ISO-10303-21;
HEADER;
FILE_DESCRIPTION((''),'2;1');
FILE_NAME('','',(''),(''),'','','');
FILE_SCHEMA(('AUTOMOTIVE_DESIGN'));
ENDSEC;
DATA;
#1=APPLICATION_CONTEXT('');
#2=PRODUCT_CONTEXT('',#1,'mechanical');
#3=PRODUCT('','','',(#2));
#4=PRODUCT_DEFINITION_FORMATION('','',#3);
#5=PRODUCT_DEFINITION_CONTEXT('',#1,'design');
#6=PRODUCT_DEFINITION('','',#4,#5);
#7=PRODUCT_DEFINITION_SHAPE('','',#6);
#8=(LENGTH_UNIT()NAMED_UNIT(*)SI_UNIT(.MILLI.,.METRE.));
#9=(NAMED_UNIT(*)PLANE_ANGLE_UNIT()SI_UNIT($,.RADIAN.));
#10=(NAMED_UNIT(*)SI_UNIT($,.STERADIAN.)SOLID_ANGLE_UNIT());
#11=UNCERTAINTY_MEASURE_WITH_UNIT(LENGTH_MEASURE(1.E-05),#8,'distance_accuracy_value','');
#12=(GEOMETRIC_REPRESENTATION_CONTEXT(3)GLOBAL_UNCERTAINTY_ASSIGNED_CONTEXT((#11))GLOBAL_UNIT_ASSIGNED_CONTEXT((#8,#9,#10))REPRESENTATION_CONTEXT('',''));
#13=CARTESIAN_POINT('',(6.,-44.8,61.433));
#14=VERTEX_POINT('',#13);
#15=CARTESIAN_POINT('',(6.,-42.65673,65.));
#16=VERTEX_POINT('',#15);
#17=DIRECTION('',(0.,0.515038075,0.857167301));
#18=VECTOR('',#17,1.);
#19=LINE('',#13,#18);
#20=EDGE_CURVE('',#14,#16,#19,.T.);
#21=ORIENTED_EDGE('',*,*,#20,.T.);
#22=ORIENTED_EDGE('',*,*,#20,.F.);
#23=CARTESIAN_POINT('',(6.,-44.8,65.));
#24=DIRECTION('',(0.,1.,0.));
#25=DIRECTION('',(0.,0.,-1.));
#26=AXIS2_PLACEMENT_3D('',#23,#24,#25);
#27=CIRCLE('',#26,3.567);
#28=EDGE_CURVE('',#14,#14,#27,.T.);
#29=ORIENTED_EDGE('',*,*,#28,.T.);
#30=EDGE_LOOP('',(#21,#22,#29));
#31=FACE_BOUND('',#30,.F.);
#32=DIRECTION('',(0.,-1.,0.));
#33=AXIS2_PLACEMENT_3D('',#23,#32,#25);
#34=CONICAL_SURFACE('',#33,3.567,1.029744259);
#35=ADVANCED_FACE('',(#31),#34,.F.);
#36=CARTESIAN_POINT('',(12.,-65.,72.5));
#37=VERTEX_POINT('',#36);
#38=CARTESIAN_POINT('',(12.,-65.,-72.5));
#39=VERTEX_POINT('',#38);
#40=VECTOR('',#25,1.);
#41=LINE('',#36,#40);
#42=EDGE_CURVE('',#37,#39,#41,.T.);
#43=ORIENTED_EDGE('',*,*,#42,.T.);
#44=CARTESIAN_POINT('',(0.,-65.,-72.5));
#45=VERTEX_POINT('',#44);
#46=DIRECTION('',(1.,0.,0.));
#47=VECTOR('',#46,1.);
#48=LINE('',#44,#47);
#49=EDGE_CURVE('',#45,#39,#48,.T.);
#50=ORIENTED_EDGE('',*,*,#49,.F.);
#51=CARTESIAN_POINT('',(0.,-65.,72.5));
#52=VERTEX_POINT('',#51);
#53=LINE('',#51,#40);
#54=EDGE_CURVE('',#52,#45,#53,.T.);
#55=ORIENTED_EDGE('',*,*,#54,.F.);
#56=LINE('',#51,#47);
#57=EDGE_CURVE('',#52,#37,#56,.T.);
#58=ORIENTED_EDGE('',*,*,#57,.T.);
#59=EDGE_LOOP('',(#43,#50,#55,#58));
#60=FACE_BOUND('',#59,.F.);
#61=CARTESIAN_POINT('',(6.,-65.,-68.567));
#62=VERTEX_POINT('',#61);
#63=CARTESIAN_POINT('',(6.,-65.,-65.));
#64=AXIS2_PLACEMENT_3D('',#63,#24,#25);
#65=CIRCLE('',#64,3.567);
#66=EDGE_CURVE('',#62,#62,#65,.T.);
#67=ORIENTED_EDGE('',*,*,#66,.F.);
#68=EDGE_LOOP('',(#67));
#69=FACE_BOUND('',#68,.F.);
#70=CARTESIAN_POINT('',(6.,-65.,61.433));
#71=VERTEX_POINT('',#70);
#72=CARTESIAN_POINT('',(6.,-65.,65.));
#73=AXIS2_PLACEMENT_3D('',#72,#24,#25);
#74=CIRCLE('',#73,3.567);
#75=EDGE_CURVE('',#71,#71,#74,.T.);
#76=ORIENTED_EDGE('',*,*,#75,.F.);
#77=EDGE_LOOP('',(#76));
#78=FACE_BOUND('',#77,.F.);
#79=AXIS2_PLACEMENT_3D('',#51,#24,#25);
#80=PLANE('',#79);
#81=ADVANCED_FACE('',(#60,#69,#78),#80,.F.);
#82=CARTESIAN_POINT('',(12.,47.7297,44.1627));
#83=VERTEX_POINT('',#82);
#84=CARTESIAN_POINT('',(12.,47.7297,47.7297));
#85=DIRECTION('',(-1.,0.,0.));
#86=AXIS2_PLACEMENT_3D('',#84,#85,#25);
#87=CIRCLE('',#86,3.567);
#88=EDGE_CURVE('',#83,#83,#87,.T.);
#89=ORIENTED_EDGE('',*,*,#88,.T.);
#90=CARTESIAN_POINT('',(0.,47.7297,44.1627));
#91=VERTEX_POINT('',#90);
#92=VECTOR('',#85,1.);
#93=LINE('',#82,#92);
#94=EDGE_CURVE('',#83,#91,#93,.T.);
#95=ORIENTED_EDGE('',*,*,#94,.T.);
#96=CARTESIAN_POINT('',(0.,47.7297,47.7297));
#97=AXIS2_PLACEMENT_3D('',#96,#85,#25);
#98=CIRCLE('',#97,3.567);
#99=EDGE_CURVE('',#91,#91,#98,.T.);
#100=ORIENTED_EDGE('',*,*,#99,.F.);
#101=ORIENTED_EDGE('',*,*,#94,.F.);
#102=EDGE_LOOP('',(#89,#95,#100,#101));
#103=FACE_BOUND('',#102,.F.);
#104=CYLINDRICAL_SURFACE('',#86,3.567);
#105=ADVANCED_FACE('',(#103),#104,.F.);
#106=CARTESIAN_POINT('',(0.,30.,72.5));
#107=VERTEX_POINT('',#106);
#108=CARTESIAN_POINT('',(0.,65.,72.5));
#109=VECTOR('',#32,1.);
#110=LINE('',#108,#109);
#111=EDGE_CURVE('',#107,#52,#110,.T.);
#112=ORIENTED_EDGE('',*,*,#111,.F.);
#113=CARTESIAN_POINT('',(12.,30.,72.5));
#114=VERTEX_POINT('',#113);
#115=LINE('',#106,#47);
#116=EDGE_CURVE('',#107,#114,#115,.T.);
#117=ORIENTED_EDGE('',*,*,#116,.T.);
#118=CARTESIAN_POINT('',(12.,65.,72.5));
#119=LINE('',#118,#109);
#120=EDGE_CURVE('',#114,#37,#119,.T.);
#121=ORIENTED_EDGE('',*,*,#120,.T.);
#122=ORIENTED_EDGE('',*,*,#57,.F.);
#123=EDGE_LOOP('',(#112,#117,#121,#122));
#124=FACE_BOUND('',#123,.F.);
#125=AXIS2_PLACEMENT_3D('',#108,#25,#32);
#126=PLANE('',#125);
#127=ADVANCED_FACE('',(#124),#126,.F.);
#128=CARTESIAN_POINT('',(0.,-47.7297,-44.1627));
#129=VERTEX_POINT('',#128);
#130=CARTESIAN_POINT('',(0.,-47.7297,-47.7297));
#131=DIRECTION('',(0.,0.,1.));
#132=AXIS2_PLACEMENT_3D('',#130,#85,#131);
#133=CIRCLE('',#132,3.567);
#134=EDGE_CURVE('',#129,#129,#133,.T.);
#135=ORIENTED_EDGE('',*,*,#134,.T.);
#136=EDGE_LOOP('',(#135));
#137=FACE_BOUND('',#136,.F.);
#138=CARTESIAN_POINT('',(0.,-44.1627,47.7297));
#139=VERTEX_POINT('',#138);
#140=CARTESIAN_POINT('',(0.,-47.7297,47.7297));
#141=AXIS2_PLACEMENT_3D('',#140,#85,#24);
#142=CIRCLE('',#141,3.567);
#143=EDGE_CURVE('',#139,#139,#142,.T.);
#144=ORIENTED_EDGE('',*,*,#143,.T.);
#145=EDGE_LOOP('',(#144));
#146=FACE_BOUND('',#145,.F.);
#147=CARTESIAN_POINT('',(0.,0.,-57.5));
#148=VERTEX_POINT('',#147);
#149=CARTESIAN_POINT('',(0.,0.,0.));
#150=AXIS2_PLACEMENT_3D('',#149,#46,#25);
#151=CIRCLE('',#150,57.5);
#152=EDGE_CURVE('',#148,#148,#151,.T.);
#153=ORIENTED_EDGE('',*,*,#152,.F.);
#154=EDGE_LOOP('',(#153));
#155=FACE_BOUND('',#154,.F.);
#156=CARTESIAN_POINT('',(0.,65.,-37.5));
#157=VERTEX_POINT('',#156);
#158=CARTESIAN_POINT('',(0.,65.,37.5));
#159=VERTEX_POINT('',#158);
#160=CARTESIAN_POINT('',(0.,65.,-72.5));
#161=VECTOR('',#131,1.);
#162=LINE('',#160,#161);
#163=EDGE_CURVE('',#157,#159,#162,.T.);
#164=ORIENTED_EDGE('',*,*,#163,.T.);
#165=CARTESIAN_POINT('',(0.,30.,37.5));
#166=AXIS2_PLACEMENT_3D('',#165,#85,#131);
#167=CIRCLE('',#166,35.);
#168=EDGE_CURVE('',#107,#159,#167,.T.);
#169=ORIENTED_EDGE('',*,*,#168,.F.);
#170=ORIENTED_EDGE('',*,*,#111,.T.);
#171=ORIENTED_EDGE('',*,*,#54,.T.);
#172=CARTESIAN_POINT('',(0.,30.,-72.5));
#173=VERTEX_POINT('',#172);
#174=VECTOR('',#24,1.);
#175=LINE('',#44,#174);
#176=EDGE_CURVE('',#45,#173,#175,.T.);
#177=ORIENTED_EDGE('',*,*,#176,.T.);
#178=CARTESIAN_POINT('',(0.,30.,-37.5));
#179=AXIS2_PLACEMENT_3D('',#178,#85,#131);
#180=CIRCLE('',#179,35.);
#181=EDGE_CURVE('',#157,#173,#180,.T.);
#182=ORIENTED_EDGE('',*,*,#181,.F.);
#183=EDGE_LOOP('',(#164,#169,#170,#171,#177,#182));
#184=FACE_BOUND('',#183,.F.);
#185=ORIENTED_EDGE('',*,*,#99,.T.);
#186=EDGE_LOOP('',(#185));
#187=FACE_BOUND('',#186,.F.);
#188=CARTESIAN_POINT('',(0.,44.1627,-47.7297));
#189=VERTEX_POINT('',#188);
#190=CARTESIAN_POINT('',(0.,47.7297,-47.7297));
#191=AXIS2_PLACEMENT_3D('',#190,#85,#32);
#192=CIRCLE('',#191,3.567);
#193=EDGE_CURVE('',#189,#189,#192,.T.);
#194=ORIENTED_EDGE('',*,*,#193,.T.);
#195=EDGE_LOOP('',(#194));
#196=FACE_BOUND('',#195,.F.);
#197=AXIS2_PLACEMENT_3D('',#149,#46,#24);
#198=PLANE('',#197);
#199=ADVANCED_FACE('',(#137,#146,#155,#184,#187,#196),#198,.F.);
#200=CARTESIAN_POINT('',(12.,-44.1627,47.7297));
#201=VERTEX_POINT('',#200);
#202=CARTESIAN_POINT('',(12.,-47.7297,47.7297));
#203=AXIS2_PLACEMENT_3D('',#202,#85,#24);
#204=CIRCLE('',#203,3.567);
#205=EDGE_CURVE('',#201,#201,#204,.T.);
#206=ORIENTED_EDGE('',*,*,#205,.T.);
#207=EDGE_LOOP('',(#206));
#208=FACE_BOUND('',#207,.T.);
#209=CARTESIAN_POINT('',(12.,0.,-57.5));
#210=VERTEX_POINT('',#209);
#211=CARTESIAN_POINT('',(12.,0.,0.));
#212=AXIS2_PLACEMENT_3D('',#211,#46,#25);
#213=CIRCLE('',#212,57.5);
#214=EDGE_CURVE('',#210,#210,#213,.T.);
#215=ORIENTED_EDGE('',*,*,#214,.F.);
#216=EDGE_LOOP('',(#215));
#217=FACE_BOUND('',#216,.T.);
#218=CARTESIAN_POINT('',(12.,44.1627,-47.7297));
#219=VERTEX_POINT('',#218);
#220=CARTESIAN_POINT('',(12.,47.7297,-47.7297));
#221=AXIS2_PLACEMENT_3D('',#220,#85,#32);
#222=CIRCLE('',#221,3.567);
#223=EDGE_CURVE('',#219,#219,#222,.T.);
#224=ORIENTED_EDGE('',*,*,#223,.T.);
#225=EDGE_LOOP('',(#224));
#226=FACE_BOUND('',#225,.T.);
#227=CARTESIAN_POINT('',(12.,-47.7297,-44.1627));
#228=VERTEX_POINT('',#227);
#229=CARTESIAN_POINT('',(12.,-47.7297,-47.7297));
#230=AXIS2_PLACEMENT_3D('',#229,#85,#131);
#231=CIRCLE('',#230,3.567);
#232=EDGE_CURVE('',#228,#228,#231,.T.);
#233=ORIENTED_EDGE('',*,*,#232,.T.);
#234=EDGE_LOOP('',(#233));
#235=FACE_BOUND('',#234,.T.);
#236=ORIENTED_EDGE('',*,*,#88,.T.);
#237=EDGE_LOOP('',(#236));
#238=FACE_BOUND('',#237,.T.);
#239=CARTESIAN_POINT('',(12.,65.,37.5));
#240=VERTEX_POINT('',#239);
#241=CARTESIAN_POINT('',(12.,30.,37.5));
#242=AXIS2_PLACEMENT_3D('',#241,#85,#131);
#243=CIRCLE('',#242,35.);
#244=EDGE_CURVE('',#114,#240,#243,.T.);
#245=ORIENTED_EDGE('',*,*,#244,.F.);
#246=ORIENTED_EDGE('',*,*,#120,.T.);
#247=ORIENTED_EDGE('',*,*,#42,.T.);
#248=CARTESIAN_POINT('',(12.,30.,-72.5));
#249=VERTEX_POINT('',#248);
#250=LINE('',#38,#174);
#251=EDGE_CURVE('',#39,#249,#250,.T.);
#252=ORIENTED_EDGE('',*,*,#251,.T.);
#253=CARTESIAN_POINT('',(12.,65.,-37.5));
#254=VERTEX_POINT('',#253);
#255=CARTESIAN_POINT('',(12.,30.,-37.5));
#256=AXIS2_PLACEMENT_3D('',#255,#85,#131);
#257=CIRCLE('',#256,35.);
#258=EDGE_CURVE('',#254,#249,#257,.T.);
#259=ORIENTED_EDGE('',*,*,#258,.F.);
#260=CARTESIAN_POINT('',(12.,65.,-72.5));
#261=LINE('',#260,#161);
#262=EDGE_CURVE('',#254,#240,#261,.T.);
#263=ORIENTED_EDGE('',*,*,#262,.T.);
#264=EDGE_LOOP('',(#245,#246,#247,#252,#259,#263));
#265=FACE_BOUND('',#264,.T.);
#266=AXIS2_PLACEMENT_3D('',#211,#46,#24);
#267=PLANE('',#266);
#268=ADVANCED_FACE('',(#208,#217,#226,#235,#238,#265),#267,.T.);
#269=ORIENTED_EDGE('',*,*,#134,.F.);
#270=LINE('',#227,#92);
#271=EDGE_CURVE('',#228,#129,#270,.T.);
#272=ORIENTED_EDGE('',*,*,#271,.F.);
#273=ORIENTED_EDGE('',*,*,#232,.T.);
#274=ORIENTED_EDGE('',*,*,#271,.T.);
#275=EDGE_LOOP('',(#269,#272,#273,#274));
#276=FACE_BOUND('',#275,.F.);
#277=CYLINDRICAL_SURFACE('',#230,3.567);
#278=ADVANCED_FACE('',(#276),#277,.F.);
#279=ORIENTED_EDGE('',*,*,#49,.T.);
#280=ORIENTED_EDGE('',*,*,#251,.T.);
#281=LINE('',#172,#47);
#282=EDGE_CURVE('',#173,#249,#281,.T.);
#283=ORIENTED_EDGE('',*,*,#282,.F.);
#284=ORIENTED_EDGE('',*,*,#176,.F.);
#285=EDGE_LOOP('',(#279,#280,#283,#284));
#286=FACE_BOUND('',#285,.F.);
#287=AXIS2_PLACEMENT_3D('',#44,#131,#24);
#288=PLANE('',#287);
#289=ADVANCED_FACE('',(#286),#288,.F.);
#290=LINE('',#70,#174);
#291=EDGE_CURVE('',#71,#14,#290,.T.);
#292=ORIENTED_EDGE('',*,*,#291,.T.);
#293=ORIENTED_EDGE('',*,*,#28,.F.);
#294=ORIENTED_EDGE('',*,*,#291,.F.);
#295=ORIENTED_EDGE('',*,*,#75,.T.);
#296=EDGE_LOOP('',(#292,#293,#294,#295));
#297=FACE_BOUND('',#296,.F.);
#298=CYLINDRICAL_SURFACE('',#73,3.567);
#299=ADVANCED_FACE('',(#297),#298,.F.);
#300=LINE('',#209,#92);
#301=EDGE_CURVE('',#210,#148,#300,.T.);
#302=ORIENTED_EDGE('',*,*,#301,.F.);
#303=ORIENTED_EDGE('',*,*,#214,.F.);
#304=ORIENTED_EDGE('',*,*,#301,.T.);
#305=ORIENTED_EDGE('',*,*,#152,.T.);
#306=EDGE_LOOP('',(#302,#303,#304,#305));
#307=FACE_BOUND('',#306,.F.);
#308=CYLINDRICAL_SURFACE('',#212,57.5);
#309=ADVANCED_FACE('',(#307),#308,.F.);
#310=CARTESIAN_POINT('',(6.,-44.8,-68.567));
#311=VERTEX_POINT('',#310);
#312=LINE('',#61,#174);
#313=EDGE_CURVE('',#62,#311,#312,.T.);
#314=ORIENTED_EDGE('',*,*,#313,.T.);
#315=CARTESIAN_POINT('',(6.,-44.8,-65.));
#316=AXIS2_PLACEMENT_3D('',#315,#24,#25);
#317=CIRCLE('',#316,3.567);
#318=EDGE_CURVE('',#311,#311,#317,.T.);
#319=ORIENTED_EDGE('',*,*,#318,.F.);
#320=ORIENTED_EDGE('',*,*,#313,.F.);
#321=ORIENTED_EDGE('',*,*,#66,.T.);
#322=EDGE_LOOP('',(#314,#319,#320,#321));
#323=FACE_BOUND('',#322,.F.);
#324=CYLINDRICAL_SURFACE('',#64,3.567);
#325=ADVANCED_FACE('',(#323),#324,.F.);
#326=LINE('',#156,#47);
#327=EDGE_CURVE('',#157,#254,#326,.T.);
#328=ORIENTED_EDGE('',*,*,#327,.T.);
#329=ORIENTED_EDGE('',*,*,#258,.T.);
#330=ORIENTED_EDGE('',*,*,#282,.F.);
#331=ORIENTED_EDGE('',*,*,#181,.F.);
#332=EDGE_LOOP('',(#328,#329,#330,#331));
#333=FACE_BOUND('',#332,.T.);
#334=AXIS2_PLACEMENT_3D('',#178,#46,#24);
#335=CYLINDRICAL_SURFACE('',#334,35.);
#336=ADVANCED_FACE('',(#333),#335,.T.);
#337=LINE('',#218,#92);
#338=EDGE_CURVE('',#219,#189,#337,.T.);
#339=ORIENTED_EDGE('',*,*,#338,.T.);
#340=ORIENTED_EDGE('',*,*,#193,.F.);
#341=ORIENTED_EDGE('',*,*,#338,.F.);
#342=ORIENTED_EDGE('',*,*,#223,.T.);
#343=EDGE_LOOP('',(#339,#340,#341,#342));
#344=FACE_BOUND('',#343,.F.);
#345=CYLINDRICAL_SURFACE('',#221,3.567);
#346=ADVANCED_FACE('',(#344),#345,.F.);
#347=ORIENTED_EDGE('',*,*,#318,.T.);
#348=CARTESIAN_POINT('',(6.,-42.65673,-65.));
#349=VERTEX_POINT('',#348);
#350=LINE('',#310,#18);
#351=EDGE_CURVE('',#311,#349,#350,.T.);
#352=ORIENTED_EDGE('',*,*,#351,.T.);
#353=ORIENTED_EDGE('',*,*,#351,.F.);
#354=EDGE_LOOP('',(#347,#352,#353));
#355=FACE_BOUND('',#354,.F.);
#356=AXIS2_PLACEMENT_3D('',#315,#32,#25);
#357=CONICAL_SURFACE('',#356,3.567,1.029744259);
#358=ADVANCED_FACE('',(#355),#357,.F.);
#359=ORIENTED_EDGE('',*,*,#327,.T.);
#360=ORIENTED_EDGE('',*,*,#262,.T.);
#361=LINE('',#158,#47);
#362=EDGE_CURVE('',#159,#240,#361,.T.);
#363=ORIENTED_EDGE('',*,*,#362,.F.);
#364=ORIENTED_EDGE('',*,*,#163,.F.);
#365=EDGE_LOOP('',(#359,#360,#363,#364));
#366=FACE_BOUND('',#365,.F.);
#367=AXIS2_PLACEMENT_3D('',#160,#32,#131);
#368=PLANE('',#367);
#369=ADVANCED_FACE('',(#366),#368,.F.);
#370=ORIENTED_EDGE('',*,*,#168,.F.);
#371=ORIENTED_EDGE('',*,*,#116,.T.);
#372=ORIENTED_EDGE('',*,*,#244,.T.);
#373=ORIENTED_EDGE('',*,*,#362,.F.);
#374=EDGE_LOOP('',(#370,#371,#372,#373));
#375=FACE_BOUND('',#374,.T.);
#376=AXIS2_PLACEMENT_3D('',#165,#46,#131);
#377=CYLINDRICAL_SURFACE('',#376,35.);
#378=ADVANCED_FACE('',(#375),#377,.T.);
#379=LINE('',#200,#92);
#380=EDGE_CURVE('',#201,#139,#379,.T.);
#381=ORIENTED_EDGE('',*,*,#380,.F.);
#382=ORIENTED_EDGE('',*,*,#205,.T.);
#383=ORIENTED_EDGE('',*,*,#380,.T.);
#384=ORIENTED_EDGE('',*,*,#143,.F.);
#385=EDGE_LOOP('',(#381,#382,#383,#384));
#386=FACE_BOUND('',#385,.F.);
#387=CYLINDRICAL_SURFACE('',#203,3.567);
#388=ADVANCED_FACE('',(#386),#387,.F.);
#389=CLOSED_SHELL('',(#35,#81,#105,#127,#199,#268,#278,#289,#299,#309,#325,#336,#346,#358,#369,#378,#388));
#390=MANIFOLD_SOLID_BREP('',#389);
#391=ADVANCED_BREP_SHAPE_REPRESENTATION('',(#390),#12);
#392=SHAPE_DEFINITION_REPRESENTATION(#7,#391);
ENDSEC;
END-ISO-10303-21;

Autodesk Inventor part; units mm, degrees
ref_plane "YZ Plane" through (0, 0, 0) normal (1, 0, 0) x (0, 1, 0)
ref_plane "XZ Plane" through (0, 0, 0) normal (0, 1, 0) x (-1, 0, 0)
ref_plane "XY Plane" through (0, 0, 0) normal (0, 0, 1) x (1, 0, 0)
sketch "Sketch1" plane through (0, 0, 0) normal (1, 0, 0) x (0, 1, 0)
  line L0 (-65, -72.5) -> (65, -72.5)
  line L1 (65, -72.5) -> (65, 72.5)
  line L2 (65, 72.5) -> (-65, 72.5)
  line L3 (-65, 72.5) -> (-65, -72.5)
  line L4 (-65, -72.5) -> (65, 72.5) construction
  line L5 (65, -72.5) -> (-65, 72.5) construction
  point P0 (0, 0)
  dimension "d0" = 130
  dimension "d1" = 145
extrude "Extrusion1" add sketch "Sketch1" along normal blind 12
fillet "Fillet1" radius 35 2 edges at (6, 65, 72.5) (6, 65, -72.5)
sketch "Sketch2" plane through (0, -65, -72.5) normal (0, -1, 0) x (1, 0, 0)
  line L0 (0, 145) -> (12, 145) projected
  line L1 (0, 0) -> (12, 0) projected
  line L2 (12, 145) -> (12, 0) projected
  point P0 (0, 72.5)
  point P1 (6, 137.5)
  point P2 (6, 7.5)
  point P3 (6, 145)
  point P4 (6, 0)
  dimension "d5" = 7.5
  dimension "d6" = 7.5
  dimension "d7" = 6
  dimension "d8" = 6
hole "Hole1" at (6, -65, 65) at (6, -65, -65) direction (0, 1, 0) diameter 7.134 depth 20.2 tip angle 118 thread size "M8x0.8" class "6H" standard "ISO Metric profile"
sketch "Sketch3" plane through (12, 0, 0) normal (1, 0, 0) x (0, 0, -1)
  circle A0 centre (0, 0) radius 57.5
  dimension "d16" = 115
extrude "Extrusion2" cut sketch "Sketch3" against normal blind 12
sketch "Sketch4" plane through (12, 0, 0) normal (1, 0, 0) x (0, 0, -1)
  circle A0 centre (0, 0) radius 67.5 construction
  line L0 (0, 0) -> (-82.2434, 82.2434) construction
  line L1 (0, 0) -> (116.3098, 0) construction
  point P0 (-47.7297, 47.7297)
  dimension "d19" = 135
  dimension "d20" = 135
hole "Hole2" at (12, 47.7297, 47.7297) direction (-1, 0, 0) diameter 7.134 depth 20.2 tip angle 118 thread size "M8x0.8" class "6H" standard "ISO Metric profile"
pattern_circular "Circular Pattern1" count 4 over 360 about axis through (-10, 0, 0) along (1, 0, 0) of "Hole2"
properties part number "Gear_support"
